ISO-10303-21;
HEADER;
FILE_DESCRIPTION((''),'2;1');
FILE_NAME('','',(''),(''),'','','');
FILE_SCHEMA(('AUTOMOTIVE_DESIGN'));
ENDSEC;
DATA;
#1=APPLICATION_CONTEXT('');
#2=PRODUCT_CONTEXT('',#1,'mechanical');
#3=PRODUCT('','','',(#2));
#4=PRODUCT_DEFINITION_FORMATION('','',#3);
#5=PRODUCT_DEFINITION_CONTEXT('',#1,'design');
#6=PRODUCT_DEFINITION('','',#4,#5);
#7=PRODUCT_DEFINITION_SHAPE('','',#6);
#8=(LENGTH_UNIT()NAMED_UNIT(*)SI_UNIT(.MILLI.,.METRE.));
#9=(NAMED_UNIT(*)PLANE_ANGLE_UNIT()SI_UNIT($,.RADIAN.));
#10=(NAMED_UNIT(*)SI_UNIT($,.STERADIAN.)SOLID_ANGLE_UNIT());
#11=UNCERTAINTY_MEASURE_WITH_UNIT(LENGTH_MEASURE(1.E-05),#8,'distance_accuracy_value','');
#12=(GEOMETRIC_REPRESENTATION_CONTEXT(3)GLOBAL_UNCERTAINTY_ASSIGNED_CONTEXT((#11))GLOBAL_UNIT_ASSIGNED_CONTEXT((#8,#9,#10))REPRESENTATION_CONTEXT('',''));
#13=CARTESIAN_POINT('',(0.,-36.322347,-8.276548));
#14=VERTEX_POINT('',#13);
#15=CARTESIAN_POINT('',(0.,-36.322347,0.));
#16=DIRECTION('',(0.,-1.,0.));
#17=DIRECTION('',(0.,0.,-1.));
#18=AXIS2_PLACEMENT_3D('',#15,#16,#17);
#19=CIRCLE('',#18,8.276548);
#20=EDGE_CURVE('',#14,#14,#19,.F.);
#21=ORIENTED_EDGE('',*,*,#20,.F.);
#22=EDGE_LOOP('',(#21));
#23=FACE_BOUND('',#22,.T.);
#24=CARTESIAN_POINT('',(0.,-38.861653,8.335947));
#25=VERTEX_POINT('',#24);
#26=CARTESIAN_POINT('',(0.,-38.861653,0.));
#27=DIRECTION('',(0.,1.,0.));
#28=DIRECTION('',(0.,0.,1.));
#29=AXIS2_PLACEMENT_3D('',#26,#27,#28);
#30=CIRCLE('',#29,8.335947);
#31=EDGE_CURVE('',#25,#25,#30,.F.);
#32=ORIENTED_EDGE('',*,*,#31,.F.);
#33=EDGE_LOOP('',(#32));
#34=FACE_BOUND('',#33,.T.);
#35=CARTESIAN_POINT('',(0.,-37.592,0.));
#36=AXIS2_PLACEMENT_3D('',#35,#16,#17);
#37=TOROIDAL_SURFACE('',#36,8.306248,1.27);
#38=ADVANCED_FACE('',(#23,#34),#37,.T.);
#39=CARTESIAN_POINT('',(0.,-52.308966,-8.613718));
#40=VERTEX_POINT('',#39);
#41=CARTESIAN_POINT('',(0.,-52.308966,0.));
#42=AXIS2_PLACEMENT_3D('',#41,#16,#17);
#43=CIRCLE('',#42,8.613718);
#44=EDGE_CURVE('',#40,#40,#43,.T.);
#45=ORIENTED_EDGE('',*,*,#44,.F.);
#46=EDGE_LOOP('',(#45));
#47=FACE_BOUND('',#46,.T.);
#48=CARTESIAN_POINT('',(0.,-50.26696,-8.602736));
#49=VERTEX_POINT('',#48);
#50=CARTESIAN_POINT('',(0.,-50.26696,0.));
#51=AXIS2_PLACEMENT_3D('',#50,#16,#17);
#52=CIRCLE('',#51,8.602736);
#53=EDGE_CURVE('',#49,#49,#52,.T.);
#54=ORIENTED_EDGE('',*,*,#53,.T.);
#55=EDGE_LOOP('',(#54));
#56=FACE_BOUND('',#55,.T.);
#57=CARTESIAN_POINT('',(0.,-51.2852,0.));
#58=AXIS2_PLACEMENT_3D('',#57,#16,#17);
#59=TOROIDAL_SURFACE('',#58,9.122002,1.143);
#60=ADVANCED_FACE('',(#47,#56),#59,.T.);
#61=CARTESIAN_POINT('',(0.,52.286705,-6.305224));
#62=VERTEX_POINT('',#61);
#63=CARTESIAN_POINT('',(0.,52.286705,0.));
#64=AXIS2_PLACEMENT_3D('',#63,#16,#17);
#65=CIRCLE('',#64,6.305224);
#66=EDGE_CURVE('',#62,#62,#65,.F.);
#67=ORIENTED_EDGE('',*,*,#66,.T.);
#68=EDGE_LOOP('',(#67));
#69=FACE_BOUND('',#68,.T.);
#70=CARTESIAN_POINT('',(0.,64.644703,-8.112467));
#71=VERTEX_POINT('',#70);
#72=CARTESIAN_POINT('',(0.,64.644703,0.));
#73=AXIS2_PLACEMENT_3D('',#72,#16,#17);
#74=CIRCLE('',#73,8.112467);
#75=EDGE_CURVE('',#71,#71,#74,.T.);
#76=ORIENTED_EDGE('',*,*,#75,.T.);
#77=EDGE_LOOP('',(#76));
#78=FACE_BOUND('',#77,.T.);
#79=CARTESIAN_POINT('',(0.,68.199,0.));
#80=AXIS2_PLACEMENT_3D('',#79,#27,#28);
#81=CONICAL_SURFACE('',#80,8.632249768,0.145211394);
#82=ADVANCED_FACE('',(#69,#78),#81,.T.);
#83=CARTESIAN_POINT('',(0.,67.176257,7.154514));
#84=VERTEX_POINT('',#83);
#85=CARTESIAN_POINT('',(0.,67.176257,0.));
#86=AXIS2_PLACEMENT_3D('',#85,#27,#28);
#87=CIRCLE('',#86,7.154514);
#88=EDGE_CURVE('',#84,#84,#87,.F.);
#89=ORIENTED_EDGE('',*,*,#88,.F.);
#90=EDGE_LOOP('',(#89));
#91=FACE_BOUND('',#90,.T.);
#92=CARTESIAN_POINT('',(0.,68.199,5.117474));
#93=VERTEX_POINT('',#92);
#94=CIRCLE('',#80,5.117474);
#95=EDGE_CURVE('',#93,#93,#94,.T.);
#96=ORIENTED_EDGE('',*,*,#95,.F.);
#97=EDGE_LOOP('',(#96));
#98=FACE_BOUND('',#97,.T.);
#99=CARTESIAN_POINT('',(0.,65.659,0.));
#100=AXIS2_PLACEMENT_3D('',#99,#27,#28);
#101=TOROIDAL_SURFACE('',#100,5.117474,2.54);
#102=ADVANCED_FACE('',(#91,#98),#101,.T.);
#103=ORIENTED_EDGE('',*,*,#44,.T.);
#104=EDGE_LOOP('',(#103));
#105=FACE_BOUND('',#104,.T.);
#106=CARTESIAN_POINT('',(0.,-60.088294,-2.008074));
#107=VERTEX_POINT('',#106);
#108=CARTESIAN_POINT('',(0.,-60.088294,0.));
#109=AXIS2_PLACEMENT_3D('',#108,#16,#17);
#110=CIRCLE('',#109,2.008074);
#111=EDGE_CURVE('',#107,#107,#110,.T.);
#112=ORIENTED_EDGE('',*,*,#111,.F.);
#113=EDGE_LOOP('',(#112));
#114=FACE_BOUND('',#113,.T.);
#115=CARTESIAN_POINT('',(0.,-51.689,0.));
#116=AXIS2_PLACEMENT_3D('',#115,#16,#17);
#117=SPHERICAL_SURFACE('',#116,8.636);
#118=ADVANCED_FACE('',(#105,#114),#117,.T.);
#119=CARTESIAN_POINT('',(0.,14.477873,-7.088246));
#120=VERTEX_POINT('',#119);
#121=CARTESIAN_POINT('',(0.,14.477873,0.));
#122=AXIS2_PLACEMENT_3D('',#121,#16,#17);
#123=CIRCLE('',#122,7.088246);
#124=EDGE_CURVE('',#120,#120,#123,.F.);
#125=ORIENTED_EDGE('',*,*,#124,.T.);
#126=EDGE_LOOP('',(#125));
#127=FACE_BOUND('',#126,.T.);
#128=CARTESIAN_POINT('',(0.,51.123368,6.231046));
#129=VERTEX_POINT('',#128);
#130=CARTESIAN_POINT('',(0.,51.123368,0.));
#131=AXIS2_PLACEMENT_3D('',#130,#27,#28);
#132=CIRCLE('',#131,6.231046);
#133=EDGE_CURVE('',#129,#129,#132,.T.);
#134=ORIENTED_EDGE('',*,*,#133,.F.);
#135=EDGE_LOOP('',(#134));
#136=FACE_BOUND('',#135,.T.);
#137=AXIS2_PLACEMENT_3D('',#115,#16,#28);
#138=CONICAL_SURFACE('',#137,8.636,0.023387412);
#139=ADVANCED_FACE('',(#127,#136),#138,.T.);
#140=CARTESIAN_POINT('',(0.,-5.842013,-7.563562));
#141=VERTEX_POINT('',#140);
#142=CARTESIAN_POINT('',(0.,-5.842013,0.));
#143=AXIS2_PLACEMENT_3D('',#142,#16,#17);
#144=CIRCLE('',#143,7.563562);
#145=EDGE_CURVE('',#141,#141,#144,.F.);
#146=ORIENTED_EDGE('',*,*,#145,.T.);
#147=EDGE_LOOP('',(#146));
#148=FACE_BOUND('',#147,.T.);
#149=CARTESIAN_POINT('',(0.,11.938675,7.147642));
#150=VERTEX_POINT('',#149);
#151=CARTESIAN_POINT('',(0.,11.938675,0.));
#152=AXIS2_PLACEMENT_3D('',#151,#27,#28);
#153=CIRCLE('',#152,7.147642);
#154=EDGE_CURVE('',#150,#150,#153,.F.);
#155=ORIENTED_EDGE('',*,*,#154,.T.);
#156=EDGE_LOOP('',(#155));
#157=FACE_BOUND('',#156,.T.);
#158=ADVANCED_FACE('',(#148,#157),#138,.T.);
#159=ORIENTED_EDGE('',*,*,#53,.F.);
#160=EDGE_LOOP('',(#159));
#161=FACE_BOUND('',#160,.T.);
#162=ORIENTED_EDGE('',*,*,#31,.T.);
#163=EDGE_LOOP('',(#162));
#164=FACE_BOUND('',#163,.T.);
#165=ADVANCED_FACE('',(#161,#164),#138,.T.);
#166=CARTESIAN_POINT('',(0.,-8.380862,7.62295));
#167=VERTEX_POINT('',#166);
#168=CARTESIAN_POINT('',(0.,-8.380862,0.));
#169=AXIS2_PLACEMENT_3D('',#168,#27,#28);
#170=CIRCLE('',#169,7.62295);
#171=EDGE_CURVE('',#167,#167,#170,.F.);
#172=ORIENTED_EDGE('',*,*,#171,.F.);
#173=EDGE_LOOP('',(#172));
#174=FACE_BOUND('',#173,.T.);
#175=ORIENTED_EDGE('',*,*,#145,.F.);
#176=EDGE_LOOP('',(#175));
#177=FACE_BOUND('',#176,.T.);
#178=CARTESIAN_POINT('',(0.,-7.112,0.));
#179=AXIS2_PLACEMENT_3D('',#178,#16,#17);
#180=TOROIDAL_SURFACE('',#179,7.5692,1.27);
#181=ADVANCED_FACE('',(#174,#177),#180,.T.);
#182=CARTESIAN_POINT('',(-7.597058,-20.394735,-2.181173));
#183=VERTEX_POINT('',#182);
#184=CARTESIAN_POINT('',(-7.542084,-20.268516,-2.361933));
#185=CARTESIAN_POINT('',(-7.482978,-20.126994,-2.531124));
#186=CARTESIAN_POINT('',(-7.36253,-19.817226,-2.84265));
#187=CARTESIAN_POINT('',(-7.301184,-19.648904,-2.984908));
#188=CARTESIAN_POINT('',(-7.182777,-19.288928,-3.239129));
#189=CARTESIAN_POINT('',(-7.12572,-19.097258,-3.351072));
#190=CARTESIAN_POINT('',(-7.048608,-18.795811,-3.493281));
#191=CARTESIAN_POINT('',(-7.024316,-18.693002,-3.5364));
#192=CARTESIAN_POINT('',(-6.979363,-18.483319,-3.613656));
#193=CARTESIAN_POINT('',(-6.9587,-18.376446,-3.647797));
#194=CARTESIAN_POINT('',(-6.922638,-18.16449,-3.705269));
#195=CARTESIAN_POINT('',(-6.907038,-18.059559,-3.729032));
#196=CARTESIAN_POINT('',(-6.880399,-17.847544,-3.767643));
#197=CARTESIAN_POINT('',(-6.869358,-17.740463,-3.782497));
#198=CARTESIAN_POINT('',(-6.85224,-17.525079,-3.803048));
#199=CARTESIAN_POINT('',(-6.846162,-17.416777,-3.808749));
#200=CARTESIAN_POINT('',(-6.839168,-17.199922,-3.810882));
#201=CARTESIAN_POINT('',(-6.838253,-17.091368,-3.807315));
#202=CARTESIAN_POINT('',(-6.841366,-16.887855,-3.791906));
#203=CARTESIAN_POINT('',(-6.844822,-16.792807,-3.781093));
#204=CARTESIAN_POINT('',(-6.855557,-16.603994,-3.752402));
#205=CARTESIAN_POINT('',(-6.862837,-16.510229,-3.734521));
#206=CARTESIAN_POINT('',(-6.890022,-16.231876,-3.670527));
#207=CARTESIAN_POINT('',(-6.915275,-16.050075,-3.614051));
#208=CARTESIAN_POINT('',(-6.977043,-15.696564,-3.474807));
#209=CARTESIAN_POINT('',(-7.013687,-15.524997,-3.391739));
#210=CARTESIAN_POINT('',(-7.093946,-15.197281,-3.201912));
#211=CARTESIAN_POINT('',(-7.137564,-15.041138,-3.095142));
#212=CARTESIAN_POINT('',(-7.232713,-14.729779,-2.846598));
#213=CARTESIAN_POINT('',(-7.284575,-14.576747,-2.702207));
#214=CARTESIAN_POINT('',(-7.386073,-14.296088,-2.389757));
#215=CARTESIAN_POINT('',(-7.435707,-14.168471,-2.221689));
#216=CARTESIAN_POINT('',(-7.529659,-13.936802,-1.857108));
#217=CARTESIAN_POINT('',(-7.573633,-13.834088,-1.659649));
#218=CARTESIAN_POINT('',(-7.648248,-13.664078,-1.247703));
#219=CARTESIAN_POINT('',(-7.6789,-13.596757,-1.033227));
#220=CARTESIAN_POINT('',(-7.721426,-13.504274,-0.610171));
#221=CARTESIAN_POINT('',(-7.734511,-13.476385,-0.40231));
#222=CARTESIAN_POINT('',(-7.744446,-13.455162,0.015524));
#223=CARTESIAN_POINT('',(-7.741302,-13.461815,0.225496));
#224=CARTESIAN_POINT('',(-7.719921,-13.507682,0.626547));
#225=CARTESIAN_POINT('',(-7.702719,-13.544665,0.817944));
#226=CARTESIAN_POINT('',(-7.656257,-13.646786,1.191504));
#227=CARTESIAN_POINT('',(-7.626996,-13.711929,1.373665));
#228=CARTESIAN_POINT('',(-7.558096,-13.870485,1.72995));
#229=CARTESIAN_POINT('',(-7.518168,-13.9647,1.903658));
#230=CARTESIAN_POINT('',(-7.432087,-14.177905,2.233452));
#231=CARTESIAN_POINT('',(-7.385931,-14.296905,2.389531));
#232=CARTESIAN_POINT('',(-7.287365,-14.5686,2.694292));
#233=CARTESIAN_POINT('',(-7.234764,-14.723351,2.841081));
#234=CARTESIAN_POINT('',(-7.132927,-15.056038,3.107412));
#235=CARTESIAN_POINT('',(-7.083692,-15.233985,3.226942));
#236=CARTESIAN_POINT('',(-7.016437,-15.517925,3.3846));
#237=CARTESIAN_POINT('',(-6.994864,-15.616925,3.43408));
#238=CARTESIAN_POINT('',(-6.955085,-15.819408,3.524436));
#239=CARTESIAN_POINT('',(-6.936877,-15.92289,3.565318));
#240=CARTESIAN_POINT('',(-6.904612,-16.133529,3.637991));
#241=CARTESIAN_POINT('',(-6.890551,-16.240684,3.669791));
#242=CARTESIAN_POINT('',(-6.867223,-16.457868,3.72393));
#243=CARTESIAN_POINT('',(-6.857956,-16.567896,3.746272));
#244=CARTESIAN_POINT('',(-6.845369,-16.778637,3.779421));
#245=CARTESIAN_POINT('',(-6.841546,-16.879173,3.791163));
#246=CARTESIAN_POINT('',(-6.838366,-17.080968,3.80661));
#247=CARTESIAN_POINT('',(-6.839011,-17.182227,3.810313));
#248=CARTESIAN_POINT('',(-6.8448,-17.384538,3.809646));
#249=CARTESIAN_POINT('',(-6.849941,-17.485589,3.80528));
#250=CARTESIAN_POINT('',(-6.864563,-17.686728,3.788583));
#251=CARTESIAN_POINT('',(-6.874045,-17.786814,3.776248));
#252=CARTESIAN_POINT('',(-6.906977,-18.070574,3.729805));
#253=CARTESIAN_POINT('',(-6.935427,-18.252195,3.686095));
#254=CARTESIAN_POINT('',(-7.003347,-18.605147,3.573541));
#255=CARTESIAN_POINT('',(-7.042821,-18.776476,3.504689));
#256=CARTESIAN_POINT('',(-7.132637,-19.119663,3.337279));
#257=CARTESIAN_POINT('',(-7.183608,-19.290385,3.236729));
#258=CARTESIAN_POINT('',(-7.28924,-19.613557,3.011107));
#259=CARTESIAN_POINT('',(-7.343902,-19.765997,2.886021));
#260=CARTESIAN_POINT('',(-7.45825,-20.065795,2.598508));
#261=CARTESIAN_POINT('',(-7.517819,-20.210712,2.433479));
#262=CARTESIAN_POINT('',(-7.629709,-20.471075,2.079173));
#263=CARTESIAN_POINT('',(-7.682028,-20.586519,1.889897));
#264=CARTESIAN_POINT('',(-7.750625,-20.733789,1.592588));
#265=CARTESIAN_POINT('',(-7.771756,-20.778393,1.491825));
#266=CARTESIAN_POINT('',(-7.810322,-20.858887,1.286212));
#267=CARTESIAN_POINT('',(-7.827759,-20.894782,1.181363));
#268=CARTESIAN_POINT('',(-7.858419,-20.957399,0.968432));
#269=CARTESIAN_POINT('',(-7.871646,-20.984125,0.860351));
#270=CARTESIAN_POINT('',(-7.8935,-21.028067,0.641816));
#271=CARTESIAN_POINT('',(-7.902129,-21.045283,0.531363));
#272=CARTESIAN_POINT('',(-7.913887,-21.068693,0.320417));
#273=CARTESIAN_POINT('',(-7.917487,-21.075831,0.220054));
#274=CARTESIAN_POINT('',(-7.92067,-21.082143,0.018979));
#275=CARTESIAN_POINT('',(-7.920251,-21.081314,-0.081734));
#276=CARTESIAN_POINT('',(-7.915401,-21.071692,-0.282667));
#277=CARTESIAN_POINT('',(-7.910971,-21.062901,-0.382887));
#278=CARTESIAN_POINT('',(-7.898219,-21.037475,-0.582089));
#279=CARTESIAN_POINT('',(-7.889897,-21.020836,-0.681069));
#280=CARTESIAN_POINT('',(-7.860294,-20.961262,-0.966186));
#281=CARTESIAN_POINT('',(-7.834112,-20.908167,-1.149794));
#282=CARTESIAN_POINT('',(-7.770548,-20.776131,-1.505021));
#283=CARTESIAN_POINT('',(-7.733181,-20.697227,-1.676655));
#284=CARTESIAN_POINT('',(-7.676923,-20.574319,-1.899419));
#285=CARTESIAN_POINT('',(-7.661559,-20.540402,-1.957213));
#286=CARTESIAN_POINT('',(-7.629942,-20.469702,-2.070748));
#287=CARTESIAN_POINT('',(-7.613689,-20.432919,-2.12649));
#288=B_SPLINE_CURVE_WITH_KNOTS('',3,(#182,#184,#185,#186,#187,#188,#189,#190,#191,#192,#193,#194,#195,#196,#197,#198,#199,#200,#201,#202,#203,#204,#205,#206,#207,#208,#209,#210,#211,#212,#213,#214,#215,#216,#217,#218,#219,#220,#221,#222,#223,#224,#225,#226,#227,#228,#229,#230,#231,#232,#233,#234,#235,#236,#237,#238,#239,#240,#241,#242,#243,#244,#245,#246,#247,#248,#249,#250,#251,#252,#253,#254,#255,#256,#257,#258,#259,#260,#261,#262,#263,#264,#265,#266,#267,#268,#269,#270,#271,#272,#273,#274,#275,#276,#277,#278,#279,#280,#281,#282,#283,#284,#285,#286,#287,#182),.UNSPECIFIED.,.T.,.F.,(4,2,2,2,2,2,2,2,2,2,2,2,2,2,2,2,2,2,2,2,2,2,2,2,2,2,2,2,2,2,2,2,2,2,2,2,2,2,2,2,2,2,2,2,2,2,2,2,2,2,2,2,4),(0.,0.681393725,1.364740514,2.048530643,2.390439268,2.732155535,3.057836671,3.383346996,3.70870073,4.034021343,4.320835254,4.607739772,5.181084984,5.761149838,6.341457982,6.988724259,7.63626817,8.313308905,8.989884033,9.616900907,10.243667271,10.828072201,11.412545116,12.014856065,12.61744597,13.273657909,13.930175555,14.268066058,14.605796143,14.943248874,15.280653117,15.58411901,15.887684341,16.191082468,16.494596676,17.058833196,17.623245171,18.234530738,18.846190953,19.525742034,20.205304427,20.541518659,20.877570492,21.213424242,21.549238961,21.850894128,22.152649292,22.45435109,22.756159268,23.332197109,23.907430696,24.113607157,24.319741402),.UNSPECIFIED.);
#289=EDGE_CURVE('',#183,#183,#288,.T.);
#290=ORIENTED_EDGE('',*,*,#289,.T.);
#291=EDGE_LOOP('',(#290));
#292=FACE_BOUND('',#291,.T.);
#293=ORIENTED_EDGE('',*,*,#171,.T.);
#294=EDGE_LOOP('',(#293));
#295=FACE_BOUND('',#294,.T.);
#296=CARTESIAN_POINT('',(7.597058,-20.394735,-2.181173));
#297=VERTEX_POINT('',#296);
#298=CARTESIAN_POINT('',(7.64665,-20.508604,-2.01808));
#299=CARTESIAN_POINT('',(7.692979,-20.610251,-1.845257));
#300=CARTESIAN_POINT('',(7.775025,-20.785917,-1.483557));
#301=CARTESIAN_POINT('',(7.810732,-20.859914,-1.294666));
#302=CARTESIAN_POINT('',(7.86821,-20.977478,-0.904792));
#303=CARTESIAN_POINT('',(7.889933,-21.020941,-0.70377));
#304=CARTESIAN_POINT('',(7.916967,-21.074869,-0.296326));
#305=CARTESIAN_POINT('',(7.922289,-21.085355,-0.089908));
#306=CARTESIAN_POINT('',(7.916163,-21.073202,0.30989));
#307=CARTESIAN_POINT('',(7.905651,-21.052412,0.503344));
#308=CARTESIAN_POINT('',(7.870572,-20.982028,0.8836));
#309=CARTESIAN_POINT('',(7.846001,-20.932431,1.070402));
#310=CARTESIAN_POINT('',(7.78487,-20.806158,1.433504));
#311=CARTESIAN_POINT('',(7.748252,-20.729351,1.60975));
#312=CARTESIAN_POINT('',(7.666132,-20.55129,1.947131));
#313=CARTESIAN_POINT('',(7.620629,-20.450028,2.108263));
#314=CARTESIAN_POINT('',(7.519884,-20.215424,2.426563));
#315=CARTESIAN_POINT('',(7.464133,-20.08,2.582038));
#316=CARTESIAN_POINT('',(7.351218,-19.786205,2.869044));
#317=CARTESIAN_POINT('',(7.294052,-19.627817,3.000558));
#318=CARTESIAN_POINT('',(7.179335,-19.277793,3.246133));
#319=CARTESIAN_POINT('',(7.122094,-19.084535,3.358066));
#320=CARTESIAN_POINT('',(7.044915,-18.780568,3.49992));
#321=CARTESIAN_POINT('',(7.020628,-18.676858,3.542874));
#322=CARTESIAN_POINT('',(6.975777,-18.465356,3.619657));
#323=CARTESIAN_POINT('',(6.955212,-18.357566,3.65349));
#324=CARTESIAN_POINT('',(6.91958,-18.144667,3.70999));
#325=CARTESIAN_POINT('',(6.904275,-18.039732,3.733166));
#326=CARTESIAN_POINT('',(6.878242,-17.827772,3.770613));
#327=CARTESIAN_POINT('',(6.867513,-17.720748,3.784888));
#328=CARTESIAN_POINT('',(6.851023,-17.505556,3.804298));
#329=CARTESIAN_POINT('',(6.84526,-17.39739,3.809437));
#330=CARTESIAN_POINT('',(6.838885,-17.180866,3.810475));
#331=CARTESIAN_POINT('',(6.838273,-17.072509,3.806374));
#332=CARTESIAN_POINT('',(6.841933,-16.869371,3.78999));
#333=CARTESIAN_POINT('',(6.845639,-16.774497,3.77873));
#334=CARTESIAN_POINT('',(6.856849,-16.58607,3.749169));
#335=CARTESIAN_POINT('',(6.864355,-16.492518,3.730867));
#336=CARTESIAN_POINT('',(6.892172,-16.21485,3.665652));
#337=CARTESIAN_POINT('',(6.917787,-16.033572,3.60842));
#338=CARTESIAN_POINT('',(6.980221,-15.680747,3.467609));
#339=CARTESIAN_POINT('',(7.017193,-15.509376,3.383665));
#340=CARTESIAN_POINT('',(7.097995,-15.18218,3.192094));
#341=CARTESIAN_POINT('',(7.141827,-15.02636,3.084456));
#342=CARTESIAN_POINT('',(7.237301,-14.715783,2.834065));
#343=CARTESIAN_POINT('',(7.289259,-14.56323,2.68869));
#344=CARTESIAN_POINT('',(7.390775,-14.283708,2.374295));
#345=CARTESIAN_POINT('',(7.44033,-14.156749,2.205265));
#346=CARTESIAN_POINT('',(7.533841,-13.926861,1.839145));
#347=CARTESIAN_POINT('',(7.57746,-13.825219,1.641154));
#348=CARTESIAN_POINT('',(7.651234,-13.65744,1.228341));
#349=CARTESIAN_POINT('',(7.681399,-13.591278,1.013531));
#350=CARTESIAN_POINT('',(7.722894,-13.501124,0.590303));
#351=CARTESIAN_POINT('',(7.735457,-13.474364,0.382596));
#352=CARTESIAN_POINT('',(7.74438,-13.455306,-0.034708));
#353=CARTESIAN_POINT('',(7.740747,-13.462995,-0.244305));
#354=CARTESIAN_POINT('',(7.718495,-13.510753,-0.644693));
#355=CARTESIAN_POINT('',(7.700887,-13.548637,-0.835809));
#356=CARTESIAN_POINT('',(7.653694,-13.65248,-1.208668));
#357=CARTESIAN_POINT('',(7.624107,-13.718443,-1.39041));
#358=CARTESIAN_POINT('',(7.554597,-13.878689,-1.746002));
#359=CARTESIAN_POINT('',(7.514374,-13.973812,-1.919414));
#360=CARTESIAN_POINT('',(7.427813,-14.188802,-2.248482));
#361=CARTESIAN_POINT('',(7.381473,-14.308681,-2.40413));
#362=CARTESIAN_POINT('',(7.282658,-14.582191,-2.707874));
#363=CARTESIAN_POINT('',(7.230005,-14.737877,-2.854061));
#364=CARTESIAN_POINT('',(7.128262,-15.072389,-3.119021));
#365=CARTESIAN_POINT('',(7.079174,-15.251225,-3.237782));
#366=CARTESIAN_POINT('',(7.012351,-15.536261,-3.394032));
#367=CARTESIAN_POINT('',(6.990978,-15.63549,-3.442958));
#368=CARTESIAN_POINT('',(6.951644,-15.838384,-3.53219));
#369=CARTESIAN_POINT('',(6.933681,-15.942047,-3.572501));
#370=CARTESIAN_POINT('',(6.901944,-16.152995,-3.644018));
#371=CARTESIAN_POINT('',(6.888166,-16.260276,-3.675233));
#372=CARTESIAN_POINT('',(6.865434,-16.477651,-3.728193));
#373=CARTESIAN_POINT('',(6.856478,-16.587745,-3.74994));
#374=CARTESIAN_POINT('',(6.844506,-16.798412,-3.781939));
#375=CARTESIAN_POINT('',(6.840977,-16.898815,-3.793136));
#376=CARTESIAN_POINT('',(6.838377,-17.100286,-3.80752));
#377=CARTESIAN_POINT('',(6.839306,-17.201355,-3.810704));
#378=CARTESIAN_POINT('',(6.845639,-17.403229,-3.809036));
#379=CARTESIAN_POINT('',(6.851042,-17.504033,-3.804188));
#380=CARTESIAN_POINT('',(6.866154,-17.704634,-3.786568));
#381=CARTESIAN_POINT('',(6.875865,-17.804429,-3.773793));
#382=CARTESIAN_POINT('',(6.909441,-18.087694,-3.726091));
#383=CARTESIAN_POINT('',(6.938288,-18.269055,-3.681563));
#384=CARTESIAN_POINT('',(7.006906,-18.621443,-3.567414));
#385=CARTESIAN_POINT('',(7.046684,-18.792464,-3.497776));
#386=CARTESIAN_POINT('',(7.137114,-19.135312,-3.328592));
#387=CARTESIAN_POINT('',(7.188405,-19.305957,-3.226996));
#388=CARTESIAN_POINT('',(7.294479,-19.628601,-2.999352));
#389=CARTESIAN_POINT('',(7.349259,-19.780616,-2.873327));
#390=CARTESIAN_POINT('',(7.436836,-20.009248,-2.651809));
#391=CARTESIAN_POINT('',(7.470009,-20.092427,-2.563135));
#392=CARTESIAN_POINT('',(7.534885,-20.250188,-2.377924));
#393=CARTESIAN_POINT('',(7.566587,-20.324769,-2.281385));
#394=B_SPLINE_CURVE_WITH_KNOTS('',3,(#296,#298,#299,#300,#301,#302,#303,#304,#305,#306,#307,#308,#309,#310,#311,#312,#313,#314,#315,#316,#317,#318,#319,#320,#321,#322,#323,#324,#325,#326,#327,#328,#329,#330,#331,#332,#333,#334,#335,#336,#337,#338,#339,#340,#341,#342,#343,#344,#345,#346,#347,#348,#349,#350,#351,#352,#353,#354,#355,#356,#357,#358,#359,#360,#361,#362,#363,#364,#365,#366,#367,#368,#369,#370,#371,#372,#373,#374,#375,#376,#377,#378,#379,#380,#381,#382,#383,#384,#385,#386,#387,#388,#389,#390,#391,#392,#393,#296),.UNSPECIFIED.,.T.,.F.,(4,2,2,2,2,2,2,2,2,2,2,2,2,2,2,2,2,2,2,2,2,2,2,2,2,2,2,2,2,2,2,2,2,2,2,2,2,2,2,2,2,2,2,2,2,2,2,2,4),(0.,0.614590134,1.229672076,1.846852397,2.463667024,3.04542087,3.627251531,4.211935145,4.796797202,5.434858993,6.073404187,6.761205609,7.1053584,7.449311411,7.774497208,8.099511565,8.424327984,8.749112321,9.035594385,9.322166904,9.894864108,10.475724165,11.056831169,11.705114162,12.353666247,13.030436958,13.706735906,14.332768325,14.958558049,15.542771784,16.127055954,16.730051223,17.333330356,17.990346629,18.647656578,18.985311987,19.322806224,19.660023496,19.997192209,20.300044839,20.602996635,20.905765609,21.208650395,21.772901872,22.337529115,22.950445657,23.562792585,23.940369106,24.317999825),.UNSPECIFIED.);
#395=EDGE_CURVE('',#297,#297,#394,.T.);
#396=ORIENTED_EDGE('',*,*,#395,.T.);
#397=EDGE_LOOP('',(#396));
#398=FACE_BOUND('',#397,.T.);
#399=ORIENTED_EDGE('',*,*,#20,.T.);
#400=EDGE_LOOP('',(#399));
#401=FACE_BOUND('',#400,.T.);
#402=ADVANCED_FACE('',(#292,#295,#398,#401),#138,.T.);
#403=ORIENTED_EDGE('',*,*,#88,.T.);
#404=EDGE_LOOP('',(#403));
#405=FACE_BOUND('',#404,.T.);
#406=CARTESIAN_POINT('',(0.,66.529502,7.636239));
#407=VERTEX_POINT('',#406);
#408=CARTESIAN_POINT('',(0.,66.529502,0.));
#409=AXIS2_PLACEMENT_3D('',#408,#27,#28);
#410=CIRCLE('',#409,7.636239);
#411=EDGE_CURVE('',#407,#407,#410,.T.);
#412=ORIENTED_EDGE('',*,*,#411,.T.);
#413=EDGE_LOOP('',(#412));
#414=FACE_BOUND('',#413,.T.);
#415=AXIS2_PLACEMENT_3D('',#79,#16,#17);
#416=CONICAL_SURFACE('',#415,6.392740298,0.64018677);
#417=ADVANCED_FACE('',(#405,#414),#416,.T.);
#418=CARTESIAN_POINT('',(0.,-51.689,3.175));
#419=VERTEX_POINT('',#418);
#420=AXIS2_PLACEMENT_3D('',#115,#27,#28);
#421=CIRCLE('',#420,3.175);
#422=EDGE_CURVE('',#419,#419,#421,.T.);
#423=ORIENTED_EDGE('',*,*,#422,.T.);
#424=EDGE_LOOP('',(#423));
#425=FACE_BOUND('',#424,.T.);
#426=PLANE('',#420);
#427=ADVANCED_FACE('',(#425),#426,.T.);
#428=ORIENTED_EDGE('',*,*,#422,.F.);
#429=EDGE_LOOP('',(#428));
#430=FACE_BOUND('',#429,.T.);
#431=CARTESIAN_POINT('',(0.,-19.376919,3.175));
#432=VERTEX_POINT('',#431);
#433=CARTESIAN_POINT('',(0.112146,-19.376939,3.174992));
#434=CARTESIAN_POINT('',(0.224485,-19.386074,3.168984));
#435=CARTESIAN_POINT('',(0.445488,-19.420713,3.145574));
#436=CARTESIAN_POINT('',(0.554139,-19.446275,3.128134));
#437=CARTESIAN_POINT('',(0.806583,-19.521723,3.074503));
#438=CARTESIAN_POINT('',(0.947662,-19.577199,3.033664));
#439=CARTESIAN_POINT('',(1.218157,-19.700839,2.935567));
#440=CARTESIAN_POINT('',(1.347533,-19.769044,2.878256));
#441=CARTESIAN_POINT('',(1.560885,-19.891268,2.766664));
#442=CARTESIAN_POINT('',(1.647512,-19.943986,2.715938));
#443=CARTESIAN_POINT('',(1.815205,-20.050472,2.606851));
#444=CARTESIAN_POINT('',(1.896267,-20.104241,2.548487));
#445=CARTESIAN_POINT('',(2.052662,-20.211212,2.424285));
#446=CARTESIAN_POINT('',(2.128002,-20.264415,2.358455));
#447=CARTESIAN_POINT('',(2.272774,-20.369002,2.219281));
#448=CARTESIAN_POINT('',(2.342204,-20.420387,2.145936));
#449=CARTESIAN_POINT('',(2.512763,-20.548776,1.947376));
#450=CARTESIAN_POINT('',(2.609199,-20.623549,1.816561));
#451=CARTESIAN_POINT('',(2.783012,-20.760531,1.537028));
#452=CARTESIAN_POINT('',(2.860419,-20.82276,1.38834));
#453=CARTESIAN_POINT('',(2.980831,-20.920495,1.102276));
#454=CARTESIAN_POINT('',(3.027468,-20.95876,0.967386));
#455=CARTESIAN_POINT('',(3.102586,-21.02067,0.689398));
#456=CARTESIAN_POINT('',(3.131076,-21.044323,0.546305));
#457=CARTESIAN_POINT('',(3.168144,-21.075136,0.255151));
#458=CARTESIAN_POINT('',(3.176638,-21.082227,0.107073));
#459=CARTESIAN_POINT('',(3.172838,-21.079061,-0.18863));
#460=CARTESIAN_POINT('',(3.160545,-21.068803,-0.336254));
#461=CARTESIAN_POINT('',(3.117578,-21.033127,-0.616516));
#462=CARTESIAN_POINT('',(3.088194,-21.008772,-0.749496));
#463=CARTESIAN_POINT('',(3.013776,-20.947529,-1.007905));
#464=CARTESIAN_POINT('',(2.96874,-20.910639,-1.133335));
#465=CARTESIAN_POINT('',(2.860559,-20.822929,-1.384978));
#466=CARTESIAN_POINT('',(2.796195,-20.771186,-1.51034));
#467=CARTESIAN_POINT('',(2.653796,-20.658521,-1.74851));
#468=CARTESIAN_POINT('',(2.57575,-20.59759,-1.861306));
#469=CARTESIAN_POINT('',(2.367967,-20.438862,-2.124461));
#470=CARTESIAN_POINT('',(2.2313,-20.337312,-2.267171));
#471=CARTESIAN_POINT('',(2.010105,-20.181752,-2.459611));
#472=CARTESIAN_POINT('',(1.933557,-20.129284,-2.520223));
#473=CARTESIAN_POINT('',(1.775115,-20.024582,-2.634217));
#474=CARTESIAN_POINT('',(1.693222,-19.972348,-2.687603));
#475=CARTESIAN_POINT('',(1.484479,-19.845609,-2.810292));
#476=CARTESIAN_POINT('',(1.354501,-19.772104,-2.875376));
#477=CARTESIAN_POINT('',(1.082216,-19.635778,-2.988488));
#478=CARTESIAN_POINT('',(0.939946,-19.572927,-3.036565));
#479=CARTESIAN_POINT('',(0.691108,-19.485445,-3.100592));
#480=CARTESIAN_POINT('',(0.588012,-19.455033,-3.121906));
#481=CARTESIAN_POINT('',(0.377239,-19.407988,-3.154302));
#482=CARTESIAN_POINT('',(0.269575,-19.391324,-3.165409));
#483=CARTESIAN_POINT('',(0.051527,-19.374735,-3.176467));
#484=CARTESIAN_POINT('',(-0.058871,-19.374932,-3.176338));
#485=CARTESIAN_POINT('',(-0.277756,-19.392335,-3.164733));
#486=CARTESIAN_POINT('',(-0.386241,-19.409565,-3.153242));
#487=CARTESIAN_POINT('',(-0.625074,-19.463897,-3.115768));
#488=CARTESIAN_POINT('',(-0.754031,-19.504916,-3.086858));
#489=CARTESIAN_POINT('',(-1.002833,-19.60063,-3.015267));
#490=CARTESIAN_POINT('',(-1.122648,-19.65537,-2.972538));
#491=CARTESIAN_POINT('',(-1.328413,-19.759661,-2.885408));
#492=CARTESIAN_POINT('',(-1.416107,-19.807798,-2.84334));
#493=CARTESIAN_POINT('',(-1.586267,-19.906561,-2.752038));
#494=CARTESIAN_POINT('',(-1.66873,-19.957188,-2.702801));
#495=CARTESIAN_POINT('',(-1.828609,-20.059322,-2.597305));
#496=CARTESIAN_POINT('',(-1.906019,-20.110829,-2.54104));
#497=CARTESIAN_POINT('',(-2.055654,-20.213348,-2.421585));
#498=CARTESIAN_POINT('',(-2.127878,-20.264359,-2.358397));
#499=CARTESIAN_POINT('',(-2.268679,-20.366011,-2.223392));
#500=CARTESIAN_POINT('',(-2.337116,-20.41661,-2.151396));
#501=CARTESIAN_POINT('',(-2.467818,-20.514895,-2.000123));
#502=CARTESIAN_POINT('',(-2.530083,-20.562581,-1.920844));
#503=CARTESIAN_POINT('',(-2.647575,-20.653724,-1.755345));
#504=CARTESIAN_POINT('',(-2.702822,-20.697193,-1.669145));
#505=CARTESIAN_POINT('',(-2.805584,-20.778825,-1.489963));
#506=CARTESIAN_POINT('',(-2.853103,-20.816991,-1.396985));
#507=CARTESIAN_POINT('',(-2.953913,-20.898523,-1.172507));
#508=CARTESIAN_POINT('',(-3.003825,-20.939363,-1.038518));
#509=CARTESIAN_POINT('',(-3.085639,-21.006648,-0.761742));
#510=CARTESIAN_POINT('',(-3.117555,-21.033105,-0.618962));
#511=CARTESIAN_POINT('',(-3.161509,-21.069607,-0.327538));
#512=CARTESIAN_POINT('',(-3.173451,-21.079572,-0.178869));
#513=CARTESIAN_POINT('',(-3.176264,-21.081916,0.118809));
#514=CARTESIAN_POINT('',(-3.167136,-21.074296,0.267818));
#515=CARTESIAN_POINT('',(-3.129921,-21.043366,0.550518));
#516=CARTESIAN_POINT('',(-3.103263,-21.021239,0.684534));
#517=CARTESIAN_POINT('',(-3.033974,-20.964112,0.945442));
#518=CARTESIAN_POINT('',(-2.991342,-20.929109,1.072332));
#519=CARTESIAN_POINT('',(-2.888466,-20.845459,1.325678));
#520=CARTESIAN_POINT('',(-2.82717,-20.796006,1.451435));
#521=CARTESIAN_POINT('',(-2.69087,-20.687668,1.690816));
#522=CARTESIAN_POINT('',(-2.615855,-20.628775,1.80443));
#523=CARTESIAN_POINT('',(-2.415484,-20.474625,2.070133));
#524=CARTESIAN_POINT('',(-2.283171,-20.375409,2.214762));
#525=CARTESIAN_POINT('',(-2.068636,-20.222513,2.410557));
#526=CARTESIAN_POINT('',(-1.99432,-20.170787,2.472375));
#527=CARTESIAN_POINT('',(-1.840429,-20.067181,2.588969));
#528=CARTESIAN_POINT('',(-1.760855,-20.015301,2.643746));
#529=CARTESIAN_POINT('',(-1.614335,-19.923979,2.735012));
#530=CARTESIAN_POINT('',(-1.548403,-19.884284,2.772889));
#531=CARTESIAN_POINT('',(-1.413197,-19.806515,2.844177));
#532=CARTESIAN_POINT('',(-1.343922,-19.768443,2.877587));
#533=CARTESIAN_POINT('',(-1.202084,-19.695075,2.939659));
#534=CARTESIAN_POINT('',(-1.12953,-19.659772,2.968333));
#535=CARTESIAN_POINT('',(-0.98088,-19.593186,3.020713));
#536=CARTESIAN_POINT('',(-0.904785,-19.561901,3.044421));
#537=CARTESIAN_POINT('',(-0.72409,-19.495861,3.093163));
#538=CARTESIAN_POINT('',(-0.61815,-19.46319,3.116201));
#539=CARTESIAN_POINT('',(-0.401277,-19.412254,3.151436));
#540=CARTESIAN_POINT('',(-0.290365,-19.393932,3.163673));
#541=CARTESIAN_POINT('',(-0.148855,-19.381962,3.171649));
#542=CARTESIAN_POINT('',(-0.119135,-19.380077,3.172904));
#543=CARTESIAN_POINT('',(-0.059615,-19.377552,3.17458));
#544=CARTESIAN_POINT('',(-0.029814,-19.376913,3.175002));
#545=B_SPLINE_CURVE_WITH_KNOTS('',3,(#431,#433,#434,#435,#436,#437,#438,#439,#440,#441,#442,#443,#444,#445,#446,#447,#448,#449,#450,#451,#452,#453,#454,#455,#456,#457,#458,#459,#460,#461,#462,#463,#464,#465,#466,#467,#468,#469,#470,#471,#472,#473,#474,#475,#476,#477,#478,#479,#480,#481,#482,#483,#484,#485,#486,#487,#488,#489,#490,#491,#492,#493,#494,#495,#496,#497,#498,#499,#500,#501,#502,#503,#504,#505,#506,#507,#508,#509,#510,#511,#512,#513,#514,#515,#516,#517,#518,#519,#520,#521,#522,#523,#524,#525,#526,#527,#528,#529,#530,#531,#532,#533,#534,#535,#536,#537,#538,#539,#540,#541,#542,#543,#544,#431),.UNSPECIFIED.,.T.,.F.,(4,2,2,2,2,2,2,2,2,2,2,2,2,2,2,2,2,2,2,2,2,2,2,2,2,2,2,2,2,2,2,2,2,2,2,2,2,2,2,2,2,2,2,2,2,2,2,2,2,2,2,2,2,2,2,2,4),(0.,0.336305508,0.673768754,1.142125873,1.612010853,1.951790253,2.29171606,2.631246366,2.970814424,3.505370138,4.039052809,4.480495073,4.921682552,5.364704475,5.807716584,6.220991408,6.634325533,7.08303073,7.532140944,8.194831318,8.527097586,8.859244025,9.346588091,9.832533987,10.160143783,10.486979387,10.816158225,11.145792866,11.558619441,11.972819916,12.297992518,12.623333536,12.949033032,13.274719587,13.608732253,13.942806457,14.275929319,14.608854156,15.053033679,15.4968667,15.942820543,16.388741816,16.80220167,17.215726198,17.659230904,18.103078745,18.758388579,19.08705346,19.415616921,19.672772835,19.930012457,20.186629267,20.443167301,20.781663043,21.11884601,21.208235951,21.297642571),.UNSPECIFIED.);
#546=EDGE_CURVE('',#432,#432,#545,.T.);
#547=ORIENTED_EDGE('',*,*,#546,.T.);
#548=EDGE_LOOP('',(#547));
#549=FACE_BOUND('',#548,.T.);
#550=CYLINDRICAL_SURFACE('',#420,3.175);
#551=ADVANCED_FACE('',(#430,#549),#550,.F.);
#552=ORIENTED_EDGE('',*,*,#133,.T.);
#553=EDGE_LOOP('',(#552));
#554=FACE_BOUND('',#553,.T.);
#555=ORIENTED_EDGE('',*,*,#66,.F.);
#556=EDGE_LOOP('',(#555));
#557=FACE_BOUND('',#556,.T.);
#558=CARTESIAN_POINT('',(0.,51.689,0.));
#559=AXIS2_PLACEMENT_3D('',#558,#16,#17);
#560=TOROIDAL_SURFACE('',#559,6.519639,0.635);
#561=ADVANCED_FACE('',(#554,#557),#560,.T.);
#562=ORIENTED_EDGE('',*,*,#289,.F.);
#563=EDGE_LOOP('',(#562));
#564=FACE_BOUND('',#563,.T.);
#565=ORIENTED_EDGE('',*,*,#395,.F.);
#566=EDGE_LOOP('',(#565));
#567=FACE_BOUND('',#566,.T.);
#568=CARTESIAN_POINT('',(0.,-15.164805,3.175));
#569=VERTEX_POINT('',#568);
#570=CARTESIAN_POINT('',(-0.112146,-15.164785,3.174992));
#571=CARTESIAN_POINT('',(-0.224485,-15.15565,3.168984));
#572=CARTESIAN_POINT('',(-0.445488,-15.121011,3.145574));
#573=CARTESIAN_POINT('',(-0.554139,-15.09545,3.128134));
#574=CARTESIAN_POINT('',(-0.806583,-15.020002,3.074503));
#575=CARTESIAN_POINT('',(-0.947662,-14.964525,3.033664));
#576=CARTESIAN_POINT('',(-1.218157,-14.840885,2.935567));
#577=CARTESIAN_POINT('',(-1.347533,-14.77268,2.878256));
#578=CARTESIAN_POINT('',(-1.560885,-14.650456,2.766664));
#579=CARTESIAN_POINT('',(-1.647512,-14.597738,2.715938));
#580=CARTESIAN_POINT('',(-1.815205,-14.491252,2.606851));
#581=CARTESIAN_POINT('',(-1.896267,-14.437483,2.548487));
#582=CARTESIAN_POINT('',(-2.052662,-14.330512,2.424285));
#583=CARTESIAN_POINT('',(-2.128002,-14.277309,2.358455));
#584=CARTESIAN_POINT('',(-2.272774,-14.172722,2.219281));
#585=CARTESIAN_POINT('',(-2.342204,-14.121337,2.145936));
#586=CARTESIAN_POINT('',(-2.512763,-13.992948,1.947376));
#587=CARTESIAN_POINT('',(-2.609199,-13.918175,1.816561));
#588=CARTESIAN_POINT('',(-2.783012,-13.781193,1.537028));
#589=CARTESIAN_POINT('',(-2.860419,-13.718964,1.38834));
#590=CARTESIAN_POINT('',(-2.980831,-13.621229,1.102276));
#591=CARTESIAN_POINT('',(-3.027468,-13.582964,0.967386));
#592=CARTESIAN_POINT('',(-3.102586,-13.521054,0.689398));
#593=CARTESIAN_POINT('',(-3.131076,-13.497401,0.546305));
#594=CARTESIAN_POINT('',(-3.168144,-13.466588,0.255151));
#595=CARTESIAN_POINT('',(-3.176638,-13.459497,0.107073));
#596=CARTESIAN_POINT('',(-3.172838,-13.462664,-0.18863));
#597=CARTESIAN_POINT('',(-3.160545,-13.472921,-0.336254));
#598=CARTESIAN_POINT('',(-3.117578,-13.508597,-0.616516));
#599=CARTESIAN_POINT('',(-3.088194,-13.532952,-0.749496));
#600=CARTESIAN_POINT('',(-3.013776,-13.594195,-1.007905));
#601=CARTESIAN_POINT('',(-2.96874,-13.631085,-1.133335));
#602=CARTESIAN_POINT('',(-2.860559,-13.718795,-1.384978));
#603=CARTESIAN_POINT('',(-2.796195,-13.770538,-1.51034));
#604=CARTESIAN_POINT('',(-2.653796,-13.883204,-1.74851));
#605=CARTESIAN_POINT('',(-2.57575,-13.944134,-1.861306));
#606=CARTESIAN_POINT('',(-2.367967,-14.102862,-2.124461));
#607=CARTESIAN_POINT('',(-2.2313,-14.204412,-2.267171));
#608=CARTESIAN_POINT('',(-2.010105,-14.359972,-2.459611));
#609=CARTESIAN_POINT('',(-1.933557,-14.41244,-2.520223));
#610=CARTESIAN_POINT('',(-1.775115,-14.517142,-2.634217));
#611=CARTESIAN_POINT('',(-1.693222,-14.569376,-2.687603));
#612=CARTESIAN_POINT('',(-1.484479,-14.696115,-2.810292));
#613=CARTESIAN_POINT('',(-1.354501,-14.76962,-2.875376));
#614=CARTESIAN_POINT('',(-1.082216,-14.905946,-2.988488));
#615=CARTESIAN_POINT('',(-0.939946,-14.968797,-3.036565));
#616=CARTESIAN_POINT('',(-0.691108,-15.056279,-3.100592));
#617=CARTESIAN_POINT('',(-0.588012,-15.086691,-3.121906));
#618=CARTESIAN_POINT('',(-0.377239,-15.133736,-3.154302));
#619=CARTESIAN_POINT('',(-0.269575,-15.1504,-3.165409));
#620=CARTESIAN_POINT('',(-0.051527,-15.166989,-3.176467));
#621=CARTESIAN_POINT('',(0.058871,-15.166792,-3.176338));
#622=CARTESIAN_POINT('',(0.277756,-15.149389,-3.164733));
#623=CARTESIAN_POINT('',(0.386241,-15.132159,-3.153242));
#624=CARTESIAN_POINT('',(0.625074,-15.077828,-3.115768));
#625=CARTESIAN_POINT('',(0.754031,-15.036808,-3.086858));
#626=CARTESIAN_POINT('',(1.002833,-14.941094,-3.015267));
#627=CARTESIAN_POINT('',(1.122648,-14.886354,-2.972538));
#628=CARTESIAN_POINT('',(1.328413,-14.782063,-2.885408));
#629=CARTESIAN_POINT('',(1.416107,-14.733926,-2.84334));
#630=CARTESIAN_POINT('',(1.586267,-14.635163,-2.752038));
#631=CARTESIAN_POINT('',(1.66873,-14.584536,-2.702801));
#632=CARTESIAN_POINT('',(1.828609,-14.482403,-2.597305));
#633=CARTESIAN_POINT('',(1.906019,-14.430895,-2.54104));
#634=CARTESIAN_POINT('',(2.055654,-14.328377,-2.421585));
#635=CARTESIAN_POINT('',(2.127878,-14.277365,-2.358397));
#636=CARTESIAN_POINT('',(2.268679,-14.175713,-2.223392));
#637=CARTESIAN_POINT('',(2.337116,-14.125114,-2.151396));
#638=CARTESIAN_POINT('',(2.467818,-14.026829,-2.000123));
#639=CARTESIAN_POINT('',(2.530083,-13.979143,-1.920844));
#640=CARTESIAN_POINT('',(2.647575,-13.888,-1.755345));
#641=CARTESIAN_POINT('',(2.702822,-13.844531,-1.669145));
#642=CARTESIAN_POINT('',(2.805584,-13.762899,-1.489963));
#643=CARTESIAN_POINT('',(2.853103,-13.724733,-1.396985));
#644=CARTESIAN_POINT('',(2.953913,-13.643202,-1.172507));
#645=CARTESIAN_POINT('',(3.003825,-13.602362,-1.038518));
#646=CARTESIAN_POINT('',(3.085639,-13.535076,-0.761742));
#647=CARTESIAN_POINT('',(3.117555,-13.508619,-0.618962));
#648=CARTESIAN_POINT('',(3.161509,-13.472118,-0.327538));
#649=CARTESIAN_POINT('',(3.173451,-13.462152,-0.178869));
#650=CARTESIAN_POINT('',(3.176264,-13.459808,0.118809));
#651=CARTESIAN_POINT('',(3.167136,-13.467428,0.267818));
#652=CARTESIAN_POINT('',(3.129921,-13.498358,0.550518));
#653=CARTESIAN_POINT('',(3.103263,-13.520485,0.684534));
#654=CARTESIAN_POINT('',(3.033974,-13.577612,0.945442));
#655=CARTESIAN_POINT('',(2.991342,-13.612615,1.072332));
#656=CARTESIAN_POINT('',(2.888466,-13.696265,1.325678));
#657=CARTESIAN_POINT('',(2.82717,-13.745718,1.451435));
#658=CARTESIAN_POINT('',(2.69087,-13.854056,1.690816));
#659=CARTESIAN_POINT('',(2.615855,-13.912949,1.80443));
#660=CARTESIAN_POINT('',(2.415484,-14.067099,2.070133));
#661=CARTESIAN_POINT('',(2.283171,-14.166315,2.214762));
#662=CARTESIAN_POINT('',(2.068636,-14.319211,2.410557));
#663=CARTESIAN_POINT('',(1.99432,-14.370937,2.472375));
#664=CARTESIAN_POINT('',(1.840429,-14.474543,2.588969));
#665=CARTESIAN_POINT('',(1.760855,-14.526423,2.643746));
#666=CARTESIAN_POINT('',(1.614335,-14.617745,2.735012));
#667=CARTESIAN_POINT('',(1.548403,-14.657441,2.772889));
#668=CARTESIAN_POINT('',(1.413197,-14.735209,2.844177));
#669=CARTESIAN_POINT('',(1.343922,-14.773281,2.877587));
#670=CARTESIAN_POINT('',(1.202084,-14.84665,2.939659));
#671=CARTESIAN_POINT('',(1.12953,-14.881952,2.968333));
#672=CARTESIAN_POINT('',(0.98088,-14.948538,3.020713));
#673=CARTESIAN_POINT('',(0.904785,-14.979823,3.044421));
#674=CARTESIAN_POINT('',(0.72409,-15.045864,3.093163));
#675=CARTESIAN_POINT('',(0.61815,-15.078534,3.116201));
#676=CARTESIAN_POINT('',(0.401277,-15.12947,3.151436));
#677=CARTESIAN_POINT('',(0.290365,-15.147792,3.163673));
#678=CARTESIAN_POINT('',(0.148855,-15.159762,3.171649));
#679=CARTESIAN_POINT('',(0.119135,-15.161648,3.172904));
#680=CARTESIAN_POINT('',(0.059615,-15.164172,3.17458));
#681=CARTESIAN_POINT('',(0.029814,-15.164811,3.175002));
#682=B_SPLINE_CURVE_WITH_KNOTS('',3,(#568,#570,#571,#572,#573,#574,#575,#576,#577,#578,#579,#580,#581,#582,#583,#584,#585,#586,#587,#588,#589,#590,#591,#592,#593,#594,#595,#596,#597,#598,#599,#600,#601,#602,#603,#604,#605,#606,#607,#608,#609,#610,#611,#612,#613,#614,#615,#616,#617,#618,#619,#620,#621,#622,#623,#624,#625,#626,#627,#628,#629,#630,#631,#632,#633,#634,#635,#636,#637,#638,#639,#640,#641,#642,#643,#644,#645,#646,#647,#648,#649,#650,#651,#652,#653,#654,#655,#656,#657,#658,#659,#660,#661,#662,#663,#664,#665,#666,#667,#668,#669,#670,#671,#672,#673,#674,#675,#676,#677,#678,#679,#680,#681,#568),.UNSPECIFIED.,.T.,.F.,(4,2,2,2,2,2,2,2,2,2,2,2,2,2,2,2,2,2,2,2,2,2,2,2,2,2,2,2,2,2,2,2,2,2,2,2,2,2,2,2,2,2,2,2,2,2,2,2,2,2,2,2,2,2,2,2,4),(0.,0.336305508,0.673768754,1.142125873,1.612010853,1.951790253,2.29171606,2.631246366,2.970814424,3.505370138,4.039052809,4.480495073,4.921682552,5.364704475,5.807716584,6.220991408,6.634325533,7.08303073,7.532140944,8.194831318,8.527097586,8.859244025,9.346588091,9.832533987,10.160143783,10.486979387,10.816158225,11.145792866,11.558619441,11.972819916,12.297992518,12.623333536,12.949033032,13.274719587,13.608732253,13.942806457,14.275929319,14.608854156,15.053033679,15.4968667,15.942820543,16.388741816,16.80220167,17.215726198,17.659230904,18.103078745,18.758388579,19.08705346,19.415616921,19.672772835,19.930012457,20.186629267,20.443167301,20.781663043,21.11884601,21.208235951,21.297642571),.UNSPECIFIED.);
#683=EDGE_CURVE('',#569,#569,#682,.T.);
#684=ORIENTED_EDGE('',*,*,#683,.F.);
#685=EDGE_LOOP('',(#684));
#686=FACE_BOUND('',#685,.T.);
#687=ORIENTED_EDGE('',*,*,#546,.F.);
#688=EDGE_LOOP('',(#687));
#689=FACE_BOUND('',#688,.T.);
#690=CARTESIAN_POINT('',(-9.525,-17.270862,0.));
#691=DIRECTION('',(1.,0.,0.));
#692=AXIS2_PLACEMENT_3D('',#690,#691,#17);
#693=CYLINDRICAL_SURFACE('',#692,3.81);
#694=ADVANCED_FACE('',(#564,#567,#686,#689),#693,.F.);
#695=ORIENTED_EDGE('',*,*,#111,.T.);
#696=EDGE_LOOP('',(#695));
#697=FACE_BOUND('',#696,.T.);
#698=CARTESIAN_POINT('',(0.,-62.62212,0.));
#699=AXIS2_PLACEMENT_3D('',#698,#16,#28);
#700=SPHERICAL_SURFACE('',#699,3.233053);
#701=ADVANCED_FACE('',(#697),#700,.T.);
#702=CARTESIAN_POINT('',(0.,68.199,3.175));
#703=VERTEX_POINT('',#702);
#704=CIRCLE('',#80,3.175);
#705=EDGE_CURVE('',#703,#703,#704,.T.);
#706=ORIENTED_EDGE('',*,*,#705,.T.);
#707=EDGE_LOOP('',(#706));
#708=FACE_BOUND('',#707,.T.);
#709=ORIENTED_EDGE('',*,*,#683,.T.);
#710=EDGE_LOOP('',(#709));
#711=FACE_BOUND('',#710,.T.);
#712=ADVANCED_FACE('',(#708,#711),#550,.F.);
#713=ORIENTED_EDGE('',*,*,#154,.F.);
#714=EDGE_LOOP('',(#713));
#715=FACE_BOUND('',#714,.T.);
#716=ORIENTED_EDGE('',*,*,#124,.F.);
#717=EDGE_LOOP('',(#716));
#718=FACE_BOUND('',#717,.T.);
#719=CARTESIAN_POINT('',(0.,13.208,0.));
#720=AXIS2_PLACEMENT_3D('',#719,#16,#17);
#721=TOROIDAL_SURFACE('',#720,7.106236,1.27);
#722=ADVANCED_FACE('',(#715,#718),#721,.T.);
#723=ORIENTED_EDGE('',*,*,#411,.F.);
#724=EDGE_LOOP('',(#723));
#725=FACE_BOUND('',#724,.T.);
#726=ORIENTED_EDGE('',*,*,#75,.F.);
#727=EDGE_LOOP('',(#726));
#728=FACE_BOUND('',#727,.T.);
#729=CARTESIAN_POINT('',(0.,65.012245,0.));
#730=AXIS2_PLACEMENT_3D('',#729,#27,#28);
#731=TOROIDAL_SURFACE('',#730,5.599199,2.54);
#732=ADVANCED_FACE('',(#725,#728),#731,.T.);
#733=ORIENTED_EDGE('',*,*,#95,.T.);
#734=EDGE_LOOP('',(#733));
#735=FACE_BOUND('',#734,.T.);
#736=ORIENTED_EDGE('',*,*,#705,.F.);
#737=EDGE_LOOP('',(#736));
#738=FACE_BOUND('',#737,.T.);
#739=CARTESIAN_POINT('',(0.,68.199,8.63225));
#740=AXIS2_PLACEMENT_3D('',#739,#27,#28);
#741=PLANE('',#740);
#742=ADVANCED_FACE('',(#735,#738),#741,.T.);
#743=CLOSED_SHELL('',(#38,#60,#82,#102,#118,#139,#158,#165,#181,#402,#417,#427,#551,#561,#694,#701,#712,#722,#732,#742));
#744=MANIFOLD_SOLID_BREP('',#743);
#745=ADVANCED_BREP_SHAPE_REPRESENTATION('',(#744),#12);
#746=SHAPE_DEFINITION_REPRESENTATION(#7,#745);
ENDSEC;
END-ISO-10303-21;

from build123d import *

# Parameters (mm, degrees)
SKETCH1_R           = 8.636
BOSS_EXTRUDE1_DEPTH = 51.689
DRAFT3_ANGLE        = -1.34
CHAMFER1_SIZE       = 2.54
CHAMFER1_SIZE2      = 2.23950947
FILLET1_R           = 2.54
FILLET2_R           = 2.54
SKETCH12_R          = 3.175
CUT_EXTRUDE1_DEPTH  = 119.888
SKETCH18_R          = 1.27
SKETCH20_R          = 1.27
SKETCH22_R          = 1.27
SKETCH23_R          = 3.81
CUT_EXTRUDE2_DEPTH  = 9.525


with BuildPart() as part:
    # Sketch1 → Boss-Extrude1 (new, symmetric)
    with BuildSketch(Plane(origin=(0, 0, 0), x_dir=(1, 0, 0), z_dir=(0, 1, 0))):
        with Locations(Location((0, 0, 0), (0, 0, 270))):
            Circle(SKETCH1_R)
    extrude(amount=BOSS_EXTRUDE1_DEPTH, both=True)

    # Draft3
    draft3_faces = [part.faces().sort_by_distance(p)[0] for p in [
        (0, 0, -8.636),
    ]]
    draft(draft3_faces, Plane(origin=(0, -51.689, 0), x_dir=(0, 0, -1), z_dir=(0, -1, 0)), DRAFT3_ANGLE)

    # Sketch5 → Revolve9 (revolve)
    with BuildSketch(Plane.XZ.offset(51.689)):
        with BuildLine():
            Line((3.13563785, 8.046631051), (-3.13563785, -8.046631051))
            ThreePointArc((-3.13563785, -8.046631051), (-8.046631051, 3.13563785), (3.13563785, 8.046631051))
        make_face()
    revolve(axis=Axis((3.13563785, -51.689, 8.046631051), (-0.36308914433055645, 0, -0.931754406090631)))

    # Sketch7 → Revolve10 (revolve)
    with BuildSketch(Plane(origin=(0, 0, 0), x_dir=(0, 0, -1), z_dir=(1, 0, 0)), mode=Mode.PRIVATE) as revolve10_sk:
        with BuildLine():
            Line((0, -65.855173364), (0, -60.322481787))
            ThreePointArc((0, -60.322481787), (-1.010841654, -60.263737063), (-2.008073552, -60.088293816))
            ThreePointArc((-2.008073552, -60.088293816), (-3.053246596, -63.685284829), (0, -65.855173364))
        make_face()
    revolve(revolve10_sk.sketch.rotate(Axis((0, -65.855173364, 0), (0, 1, 0)), 180), axis=Axis((0, -65.855173364, 0), (0, 1, 0)))

    # Sketch11 → Revolve11 (revolve)
    with BuildSketch(Plane(origin=(0, 0, 0), x_dir=(0, 0, -1), z_dir=(1, 0, 0))):
        Polygon((0, 51.689), (-6.217815216, 51.689), (-8.632249768, 68.199), (0, 68.199), align=None)
    revolve(axis=Axis((0, 68.199, 0), (0, -1, 0)))

    # Chamfer1
    chamfer1_edges = [part.edges().sort_by_distance(p)[0] for p in [
        (0, 68.199, -8.632249768),
    ]]
    chamfer1_side = [part.faces().sort_by_distance(p)[0] for p in [
        (0, 59.944, -7.425032492),
    ]]
    chamfer(chamfer1_edges, length=CHAMFER1_SIZE, length2=CHAMFER1_SIZE2, reference=chamfer1_side[0])

    # Fillet1
    fillet1_edges = [part.edges().sort_by_distance(p)[0] for p in [
        (0, 65.685732639, -8.264707699),
    ]]
    fillet(fillet1_edges, radius=FILLET1_R)

    # Fillet2
    fillet2_edges = [part.edges().sort_by_distance(p)[0] for p in [
        (0, 68.199, -6.392740298),
    ]]
    fillet(fillet2_edges, radius=FILLET2_R)

    # Sketch12 → Cut-Extrude1 (cut)
    with BuildSketch(Plane(origin=(0, 68.199, 0), x_dir=(1, 0, 0), z_dir=(0, 1, 0))):
        with Locations(Location((0, 0, 0), (0, 0, 270))):
            Circle(SKETCH12_R)
    extrude(amount=-CUT_EXTRUDE1_DEPTH, mode=Mode.SUBTRACT)

    # Sweep1: read off the stored shape, not the designer's step
    # Sweep1 outline → Sweep1 (revolve)
    with BuildSketch(Plane.XY):
        with BuildLine():
            Line((6.231046286, 52.286704822), (6.231046286, 51.123368464))
            ThreePointArc((6.231046286, 51.123368464), (7.153352427, 51.648592605), (6.305224009, 52.286704822))
            Line((6.305224009, 52.286704822), (6.231046286, 52.286704822))
        make_face()
    revolve(axis=Axis((0, 0, 0), (0, 1, 0)))

    # Sweep1 2 outline → Sweep1 2 (revolve)
    with BuildSketch(Plane.XY):
        Polygon((6.231046286, 51.779474584), (6.217815216, 51.689), (6.231046286, 51.123368464), align=None)
    revolve(axis=Axis((0, 0, 0), (0, 1, 0)))

    # Sweep2: read off the stored shape, not the designer's step
    # Sweep2 outline → Sweep2 (revolve)
    with BuildSketch(Plane.XY):
        with BuildLine():
            Line((8.602736104, -50.266960192), (8.602736104, -52.308965788))
            Line((8.602736104, -52.308965788), (8.613718037, -52.308965788))
            ThreePointArc((8.613718037, -52.308965788), (10.264985299, -51.279052922), (8.602736104, -50.266960192))
        make_face()
    revolve(axis=Axis((0, 0, 0), (0, 1, 0)))

    # Sweep3: sweep along a path in Sketch16
    with BuildLine(Plane(origin=(0, -37.592, 0), x_dir=(1, 0, 0), z_dir=(0, 1, 0))) as sweep3_path:
        CenterArc((0, 0), 8.3693, 0, 360)
    # Sketch18 → Sweep3 (sweep)
    with BuildSketch(Plane(origin=(0, 0, 0), x_dir=(0, 0, -1), z_dir=(1, 0, 0))):
        with Locations((8.306247529, -37.592)):
            Circle(SKETCH18_R)
    sweep(path=sweep3_path.line)

    # Sweep4: sweep along a path in Sketch19
    with BuildLine(Plane(origin=(0, -7.112, 0), x_dir=(1, 0, 0), z_dir=(0, 1, 0))) as sweep4_path:
        CenterArc((0, 0), 7.5692, 0, 360)
    # Sketch20 → Sweep4 (sweep)
    with BuildSketch(Plane(origin=(0, 0, 0), x_dir=(0, 0, -1), z_dir=(1, 0, 0))):
        with Locations((7.5692, -7.112)):
            Circle(SKETCH20_R)
    sweep(path=sweep4_path.line)

    # Sweep5: sweep along a path in Sketch21
    with BuildLine(Plane(origin=(0, 13.208, 0), x_dir=(1, 0, 0), z_dir=(0, 1, 0))) as sweep5_path:
        CenterArc((0, 0), 7.112, 0, 360)
    # Sketch22 → Sweep5 (sweep)
    with BuildSketch(Plane(origin=(0, 0, 0), x_dir=(0, 0, -1), z_dir=(1, 0, 0))):
        with Locations((7.106236422, 13.208)):
            Circle(SKETCH22_R)
    sweep(path=sweep5_path.line)

    # Sketch23 → Cut-Extrude2 (cut, symmetric)
    with BuildSketch(Plane(origin=(0, 0, 0), x_dir=(0, 0, -1), z_dir=(1, 0, 0))):
        with Locations(Location((0, -17.270862063, 0), (0, 0, 304.923797653))):
            Circle(SKETCH23_R)
    extrude(amount=CUT_EXTRUDE2_DEPTH, both=True, mode=Mode.SUBTRACT)


solid = part.part
